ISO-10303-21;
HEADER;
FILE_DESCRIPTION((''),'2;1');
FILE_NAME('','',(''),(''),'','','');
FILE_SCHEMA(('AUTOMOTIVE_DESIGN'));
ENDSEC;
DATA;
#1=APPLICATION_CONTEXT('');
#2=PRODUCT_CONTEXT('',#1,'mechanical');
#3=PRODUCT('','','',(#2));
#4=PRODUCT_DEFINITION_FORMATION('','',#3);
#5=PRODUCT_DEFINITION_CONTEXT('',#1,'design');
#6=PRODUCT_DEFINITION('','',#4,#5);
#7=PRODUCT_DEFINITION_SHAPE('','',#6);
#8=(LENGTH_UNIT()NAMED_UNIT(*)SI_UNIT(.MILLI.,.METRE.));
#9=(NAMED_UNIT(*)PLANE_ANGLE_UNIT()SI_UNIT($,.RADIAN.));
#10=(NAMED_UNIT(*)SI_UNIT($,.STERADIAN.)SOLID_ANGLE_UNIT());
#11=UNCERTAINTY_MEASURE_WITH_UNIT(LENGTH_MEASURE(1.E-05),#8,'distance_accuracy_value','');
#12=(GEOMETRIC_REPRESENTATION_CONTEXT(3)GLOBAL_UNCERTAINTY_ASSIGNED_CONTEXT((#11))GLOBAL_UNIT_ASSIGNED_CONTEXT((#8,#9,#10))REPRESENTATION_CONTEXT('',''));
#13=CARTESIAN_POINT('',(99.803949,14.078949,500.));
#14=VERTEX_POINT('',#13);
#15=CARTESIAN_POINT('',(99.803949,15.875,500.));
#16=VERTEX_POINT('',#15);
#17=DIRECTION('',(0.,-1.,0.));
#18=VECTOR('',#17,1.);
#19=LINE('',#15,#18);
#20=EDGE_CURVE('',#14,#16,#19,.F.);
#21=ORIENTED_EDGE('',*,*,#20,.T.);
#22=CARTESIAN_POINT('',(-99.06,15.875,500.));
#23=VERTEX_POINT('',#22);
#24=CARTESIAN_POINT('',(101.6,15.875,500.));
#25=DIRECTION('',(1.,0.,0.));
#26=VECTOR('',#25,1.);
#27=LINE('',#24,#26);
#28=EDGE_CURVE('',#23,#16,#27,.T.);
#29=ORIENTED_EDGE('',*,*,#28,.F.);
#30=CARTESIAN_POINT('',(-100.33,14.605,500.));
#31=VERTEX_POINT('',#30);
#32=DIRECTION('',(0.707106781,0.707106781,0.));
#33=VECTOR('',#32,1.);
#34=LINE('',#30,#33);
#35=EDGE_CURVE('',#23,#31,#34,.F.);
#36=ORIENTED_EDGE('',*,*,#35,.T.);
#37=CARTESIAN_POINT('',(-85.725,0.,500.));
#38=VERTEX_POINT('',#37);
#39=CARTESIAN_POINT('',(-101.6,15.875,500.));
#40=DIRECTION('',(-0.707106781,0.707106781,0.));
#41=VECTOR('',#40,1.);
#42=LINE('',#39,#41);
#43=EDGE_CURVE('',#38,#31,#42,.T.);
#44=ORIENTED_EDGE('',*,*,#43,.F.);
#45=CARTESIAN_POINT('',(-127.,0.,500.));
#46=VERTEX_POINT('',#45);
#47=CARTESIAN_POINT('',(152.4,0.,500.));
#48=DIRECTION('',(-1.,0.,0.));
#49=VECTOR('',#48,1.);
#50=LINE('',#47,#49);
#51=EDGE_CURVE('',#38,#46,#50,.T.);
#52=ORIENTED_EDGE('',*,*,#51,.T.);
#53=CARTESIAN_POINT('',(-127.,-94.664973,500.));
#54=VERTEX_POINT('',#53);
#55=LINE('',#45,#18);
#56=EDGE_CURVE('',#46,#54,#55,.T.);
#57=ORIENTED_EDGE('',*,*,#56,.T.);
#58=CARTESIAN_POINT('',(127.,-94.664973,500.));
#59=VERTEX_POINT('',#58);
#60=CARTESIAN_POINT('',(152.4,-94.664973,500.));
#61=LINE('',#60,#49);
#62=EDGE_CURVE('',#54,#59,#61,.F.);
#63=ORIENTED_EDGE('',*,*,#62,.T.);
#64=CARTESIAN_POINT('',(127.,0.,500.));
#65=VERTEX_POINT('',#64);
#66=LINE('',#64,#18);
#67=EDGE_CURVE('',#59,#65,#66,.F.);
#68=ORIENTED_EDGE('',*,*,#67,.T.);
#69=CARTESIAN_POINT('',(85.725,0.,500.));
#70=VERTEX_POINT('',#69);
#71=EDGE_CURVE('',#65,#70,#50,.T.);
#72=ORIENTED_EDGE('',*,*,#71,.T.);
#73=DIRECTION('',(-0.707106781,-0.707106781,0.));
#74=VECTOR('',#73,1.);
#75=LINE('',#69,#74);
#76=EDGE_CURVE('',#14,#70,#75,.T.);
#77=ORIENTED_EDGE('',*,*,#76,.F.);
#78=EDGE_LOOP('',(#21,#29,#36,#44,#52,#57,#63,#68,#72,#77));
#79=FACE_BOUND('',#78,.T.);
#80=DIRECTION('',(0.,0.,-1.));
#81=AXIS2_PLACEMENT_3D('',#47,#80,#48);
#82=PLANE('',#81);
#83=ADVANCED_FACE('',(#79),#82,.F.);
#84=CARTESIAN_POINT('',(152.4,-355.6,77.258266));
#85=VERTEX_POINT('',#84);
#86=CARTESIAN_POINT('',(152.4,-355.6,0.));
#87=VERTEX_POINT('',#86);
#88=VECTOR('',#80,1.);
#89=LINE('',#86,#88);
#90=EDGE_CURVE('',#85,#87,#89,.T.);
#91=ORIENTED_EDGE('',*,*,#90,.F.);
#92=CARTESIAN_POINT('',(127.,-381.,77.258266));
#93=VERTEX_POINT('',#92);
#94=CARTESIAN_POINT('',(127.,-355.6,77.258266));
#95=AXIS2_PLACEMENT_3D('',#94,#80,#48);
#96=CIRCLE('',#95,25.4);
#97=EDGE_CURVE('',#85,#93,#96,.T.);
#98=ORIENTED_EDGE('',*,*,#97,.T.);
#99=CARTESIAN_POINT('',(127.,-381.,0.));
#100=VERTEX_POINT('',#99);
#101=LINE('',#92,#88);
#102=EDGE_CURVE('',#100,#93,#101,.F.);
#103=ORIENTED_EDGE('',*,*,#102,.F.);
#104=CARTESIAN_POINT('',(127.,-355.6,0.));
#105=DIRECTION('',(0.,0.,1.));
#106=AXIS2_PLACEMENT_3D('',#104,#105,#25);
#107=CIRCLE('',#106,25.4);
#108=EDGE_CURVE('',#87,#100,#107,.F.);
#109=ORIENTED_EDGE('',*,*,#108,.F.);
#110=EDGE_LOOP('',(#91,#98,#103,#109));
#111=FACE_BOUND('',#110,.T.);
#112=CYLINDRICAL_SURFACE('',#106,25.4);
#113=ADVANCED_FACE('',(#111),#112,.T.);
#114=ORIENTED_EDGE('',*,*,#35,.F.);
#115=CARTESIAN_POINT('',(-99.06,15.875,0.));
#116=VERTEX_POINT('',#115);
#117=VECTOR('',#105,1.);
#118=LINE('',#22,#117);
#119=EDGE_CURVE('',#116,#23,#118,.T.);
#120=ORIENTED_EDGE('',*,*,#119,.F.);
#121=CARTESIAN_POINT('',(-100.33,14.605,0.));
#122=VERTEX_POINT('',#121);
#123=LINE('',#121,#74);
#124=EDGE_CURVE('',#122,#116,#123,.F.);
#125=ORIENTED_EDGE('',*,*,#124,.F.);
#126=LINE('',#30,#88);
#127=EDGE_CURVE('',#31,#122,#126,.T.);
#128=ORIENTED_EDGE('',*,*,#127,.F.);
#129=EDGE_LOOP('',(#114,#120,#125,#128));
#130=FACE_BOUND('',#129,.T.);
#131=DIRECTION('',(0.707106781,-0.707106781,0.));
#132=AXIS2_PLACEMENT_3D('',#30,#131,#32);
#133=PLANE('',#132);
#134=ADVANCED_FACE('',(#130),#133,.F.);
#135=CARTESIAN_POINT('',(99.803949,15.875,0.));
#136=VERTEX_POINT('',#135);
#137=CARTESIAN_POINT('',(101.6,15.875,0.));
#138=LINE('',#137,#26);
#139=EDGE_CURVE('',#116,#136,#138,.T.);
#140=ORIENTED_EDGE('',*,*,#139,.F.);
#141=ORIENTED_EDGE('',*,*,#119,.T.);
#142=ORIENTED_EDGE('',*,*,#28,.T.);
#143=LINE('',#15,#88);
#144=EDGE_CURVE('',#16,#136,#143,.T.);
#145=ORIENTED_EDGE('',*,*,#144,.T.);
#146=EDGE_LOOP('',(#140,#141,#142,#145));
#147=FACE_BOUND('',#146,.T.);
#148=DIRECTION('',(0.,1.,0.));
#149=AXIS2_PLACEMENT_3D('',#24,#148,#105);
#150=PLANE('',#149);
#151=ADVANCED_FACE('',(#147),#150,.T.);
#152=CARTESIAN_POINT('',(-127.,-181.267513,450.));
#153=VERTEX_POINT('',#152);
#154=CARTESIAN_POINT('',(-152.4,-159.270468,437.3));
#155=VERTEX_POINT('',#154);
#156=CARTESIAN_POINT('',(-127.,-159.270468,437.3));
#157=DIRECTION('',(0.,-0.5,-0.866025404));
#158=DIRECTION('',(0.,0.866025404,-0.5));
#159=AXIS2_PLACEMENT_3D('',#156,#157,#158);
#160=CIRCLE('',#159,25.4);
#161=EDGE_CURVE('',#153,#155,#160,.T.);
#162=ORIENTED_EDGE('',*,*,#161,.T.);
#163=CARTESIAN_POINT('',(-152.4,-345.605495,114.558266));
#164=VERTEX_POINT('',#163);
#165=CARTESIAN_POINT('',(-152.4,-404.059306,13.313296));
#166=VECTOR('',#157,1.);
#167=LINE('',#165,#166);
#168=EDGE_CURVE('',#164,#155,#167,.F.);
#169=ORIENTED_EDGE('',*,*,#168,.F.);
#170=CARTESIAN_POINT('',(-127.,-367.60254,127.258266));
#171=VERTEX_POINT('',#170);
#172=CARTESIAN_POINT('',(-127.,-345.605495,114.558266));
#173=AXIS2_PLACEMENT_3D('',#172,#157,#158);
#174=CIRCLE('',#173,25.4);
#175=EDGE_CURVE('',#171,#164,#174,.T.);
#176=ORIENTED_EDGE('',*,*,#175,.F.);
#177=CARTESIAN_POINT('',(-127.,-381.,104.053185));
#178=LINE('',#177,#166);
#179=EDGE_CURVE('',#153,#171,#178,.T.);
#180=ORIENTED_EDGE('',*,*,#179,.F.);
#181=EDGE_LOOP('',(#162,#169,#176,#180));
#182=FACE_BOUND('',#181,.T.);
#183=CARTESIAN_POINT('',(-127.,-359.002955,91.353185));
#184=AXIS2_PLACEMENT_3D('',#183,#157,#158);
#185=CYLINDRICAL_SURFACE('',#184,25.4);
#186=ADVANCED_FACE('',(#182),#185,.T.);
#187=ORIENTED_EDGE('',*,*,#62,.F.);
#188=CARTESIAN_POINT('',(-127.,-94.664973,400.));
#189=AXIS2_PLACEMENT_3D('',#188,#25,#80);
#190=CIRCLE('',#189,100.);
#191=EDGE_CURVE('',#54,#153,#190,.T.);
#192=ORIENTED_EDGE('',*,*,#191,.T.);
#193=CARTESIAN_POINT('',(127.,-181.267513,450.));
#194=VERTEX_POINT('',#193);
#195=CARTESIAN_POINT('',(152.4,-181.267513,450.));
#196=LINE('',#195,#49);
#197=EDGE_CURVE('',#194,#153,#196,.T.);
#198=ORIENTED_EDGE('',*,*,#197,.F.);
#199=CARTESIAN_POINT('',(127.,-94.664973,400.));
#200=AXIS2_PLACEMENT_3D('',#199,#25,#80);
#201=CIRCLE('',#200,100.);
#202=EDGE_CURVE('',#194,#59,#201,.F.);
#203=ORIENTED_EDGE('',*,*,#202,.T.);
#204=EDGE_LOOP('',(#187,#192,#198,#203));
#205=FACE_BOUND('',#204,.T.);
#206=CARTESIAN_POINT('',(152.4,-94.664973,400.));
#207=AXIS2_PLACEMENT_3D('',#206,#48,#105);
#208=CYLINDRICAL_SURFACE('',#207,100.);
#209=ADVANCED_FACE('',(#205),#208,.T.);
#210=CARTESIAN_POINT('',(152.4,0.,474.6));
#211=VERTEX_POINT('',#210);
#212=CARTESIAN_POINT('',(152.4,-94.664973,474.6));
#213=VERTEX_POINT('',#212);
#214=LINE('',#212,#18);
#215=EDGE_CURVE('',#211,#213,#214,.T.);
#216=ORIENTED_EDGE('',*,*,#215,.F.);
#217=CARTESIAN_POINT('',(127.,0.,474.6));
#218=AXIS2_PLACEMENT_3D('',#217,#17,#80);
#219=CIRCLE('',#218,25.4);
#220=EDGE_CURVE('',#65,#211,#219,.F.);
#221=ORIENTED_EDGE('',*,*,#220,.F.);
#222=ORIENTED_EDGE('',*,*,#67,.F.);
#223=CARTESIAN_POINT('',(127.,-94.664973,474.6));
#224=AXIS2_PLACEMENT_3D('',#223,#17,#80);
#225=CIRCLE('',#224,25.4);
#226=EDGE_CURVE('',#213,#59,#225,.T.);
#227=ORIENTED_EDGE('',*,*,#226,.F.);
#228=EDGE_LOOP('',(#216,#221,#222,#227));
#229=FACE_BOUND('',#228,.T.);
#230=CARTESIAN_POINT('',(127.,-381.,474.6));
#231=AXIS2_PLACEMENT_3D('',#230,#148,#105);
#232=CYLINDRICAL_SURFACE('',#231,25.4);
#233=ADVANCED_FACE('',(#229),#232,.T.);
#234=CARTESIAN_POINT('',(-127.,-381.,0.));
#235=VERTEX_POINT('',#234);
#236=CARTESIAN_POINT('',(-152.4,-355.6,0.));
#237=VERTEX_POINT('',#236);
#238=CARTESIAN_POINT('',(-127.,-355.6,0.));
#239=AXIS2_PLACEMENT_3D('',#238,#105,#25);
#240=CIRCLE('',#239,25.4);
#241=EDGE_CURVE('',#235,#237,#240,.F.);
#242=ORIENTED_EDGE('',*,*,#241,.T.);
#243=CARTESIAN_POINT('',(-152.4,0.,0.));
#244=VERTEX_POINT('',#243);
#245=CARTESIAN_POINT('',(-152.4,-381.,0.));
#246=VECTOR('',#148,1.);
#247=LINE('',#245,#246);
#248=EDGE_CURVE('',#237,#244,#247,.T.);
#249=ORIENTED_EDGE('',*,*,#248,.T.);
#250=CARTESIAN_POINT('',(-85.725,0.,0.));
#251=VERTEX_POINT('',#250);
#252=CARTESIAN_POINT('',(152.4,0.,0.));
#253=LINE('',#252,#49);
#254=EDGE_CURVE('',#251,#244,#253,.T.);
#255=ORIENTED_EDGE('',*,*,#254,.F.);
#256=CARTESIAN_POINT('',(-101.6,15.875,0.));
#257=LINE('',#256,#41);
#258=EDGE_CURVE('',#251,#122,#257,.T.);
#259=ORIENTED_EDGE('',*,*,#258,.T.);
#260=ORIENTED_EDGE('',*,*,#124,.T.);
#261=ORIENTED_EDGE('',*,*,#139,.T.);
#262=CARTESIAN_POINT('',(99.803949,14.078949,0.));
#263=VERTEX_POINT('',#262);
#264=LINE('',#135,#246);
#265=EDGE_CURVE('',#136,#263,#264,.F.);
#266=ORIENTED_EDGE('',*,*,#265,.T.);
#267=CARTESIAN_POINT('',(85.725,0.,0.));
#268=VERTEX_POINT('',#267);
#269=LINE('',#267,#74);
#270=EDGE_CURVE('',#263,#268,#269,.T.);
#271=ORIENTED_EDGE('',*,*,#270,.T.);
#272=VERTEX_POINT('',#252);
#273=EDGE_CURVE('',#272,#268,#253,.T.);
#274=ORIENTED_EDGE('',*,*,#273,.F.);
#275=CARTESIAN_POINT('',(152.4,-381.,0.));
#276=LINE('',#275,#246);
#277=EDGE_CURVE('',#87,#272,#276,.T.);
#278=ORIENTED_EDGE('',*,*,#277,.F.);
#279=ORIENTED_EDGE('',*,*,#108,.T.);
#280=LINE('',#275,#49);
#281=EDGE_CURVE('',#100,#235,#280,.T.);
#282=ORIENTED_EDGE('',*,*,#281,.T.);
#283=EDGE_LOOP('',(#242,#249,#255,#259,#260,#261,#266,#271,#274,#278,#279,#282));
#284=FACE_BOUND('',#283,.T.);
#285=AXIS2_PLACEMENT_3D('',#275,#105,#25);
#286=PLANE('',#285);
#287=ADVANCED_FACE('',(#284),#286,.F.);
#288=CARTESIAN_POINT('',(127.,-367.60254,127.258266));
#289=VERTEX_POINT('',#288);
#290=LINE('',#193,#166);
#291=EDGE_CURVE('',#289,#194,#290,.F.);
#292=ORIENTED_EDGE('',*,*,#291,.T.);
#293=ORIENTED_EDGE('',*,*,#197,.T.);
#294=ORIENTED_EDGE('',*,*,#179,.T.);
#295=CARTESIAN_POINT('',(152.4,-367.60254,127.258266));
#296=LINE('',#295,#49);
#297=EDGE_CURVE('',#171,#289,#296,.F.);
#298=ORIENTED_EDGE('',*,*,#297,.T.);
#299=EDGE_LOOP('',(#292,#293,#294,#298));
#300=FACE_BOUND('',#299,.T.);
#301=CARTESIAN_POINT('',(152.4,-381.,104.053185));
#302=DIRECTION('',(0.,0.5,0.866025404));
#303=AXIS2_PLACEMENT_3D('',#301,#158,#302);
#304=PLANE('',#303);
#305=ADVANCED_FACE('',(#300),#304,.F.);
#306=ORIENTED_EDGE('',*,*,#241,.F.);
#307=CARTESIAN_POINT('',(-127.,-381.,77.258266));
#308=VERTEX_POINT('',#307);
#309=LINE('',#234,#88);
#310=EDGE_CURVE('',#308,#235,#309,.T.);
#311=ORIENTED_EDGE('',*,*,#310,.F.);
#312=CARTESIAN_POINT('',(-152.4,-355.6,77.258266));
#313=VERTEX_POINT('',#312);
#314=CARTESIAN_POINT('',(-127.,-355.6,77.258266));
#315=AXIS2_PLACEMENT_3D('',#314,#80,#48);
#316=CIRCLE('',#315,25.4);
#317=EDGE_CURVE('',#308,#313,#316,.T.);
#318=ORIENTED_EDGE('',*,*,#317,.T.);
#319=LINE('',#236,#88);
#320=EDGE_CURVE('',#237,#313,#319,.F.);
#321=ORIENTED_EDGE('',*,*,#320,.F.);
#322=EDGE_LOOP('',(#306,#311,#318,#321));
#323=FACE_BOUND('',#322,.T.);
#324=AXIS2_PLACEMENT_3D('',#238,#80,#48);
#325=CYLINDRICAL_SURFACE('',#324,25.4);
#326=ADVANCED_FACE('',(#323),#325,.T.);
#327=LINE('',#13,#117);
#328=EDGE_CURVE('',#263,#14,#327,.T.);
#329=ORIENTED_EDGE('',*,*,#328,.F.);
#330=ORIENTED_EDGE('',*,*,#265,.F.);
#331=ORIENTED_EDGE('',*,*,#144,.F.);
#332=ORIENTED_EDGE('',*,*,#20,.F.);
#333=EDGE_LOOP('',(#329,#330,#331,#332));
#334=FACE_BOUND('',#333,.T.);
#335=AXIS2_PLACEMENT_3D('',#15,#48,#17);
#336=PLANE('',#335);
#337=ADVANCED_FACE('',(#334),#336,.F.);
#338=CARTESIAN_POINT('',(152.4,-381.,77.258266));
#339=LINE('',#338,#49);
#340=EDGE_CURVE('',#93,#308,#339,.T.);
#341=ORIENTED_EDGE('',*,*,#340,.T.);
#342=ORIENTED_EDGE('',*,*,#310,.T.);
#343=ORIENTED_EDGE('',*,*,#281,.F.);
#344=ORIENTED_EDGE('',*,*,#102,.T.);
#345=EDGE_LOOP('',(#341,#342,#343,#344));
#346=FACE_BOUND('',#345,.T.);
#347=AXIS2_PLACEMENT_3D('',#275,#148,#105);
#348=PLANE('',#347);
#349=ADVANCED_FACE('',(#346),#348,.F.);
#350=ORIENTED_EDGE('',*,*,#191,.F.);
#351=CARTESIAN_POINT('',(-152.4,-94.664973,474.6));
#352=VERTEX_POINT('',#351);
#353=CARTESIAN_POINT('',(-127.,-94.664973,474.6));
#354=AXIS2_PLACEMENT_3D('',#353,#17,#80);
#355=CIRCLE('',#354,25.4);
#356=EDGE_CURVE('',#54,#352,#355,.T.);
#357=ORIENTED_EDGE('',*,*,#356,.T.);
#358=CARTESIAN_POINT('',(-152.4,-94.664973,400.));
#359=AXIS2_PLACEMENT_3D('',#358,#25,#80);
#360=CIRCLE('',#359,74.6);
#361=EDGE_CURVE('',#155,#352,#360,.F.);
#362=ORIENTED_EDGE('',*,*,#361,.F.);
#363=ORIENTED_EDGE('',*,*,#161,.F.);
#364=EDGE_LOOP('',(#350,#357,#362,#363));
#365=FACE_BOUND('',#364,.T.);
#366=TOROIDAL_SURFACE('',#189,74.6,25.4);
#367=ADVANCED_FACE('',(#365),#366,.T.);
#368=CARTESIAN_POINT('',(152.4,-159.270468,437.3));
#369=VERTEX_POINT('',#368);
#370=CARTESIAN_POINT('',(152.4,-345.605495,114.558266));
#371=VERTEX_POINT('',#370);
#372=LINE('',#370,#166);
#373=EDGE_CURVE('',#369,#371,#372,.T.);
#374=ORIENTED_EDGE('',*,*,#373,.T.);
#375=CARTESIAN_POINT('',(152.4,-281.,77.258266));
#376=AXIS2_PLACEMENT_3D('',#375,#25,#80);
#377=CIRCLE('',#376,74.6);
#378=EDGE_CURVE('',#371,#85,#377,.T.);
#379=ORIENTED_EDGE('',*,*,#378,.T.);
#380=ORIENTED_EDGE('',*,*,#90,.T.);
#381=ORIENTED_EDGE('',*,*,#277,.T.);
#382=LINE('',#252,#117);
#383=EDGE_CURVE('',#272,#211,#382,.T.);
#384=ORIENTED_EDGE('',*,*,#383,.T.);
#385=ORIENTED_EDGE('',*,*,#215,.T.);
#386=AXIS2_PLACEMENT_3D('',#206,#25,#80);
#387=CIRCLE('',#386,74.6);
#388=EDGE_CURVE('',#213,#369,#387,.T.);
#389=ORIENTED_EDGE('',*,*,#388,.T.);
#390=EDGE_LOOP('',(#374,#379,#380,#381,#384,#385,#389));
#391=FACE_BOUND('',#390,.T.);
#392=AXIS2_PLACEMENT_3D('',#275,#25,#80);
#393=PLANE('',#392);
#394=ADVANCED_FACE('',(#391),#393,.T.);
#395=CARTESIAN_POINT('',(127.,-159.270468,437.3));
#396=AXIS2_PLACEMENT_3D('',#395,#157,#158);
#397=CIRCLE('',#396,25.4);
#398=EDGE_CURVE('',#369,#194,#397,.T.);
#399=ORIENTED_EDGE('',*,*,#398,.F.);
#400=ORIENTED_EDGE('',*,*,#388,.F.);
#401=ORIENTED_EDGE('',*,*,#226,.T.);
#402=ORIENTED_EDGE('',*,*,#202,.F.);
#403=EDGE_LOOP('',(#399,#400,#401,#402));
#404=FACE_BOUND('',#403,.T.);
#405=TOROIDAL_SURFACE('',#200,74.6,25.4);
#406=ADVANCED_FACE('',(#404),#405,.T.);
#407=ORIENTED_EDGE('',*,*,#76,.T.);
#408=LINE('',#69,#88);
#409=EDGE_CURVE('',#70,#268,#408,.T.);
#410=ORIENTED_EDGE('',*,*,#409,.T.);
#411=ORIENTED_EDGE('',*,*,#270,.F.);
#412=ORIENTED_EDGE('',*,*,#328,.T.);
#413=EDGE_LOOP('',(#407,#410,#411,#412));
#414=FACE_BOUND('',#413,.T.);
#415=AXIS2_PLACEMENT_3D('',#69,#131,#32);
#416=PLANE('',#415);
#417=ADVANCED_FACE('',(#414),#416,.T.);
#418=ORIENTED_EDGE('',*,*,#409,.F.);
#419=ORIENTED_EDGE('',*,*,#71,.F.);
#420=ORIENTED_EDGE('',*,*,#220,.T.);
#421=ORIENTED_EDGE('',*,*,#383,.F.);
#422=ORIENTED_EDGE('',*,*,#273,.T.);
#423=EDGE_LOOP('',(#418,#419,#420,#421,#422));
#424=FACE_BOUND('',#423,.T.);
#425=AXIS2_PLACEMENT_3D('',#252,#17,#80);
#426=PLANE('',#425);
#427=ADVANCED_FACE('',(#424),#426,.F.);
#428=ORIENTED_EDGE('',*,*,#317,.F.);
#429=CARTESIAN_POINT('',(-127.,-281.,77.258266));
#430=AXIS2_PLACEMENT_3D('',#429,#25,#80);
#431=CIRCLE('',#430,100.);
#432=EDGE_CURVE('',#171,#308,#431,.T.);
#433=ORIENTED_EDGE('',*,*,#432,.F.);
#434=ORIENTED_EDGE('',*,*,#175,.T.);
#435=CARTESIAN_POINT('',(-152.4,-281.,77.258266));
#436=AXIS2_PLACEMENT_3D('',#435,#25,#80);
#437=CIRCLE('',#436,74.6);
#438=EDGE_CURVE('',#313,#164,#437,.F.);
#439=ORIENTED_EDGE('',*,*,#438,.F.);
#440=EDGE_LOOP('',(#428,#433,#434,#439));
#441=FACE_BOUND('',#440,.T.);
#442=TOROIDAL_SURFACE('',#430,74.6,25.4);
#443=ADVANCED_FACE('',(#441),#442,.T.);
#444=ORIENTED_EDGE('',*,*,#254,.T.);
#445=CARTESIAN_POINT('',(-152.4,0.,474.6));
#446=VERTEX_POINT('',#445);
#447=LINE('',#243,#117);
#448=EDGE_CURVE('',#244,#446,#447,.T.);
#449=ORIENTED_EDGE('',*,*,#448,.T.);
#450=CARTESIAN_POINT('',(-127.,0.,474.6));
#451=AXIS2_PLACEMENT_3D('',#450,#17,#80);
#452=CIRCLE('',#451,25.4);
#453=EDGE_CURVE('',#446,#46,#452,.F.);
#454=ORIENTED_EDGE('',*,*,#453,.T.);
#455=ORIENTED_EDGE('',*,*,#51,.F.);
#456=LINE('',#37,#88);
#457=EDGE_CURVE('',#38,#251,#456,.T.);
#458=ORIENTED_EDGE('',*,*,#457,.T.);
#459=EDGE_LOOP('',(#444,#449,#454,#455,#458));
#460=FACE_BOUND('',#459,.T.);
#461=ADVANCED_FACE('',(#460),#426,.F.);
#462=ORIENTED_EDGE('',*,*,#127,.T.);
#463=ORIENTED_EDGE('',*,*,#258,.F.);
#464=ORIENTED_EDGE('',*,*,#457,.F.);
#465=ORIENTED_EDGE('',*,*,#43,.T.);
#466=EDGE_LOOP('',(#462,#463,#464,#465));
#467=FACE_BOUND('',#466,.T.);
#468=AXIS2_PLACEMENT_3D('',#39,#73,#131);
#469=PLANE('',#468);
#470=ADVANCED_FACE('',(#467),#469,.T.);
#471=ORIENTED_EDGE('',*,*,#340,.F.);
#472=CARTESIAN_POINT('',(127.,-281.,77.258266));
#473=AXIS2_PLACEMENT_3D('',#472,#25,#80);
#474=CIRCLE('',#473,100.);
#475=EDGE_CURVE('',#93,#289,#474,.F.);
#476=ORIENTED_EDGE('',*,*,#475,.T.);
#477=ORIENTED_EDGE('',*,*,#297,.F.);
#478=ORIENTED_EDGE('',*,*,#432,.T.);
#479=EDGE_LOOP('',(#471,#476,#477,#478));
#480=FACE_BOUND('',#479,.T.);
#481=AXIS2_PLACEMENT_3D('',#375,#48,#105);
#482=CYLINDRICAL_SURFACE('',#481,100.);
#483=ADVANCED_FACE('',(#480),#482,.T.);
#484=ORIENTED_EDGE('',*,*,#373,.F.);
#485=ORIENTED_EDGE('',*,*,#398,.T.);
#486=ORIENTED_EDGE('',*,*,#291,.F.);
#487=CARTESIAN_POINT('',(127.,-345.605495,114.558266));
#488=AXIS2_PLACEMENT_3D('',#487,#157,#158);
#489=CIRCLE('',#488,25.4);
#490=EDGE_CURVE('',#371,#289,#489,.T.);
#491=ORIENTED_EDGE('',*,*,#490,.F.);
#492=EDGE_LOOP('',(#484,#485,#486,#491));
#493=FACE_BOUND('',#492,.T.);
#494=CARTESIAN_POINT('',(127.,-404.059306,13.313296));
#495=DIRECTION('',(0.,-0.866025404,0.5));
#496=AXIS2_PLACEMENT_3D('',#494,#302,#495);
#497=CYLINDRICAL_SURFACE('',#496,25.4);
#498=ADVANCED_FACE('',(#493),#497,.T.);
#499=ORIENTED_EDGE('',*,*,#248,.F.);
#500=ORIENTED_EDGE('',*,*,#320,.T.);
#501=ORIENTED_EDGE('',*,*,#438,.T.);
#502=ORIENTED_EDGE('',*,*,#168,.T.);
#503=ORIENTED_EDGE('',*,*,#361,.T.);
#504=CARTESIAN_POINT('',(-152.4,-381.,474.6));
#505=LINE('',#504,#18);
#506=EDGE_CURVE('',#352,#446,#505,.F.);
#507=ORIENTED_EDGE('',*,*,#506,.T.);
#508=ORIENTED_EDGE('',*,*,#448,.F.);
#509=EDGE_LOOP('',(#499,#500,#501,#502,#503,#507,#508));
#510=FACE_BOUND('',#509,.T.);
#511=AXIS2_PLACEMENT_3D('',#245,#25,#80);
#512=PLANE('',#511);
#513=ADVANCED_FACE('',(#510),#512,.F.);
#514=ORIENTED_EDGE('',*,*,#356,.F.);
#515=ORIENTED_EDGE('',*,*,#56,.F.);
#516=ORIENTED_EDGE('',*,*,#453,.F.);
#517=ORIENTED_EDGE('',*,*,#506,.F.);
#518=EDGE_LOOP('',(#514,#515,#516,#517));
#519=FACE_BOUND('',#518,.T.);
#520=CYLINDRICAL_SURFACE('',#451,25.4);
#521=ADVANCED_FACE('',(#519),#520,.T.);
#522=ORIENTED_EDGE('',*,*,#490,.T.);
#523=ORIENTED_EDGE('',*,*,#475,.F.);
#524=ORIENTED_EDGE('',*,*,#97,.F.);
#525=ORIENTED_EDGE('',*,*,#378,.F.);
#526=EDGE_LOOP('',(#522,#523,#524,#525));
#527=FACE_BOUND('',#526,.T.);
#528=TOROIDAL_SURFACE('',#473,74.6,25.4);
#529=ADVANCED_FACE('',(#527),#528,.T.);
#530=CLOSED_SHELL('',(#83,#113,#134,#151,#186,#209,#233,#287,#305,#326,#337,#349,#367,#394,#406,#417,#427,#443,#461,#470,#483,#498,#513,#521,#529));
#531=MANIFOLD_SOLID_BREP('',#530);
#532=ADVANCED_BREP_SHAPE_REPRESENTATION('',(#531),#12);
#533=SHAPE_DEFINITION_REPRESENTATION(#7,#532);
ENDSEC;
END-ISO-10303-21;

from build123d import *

# Parameters (mm, degrees)
EXTRUDE1_DEPTH  = 152.4
EXTRUDE2_DEPTH  = 500
CHAMFER1_SIZE   = 1.796051224
CHAMFER1_SIZE_2 = 2.54
FILLET1_R       = 100
FILLET2_R       = 25.4


with BuildPart() as part:
    # Sketch1 → Extrude1 (new, symmetric)
    with BuildSketch(Plane(origin=(0, 0, 0), x_dir=(0, 0, -1), z_dir=(1, 0, 0))):
        Polygon((0, 0), (-500, 0), (-500, -152.4), (-104.05318539, -381), (0, -381), align=None)
    extrude(amount=EXTRUDE1_DEPTH, both=True)

    # Sketch2 → Extrude2 (add, through all)
    with BuildSketch(Plane(origin=(0, 0, 0), x_dir=(-1, 0, 0), z_dir=(0, 0, -1))):
        Polygon((-85.725, 0), (-101.6, 15.875), (101.6, 15.875), (85.725, 0), align=None)
    extrude(amount=-EXTRUDE2_DEPTH)

    # Chamfer1
    # the kernel refuses this chamfer: 2.54, 1.796051224 mm, written as the material it takes off along each edge
    with BuildSketch(Plane(origin=(-101.6, 15.875, -6.532074789), x_dir=(0.6660419652145836, -0.7459142715976788, 0), z_dir=(0, 0, 1)), Plane(origin=(101.6, 15.875, -6.532074789), x_dir=(-0.9984038297885897, 0.056478249472489896, 0), z_dir=(0, 0, 1))) as chamfer1_piece_1:
        Polygon((CHAMFER1_SIZE * 0.998403829907, CHAMFER1_SIZE * 0.0564782494792), (CHAMFER1_SIZE_2 * 0.666041965215, CHAMFER1_SIZE_2 * 0.745914271598), (0, 0), align=None)
    extrude(amount=513.064149579, mode=Mode.SUBTRACT)

    # Fillet1
    fillet1_edges = [part.edges().sort_by_distance(p)[0] for p in [
        (0, -381, 104.05318539),
        (0, -152.4, 500),
    ]]
    fillet(fillet1_edges, radius=FILLET1_R)

    # Fillet2
    fillet2_edges = [part.edges().sort_by_distance(p)[0] for p in [
        (-152.4, -381, 38.629133073),
        (-152.4, -377.592582629, 103.140170657),
        (-152.4, -274.435026919, 288.629133073),
        (-152.4, -144.664973081, 486.602540378),
        (152.4, -381, 38.629133073),
        (152.4, -377.592582629, 103.140170657),
        (152.4, -274.435026919, 288.629133073),
        (152.4, -144.664973081, 486.602540378),
        (-152.4, -47.332486541, 500),
        (152.4, -47.332486541, 500),
    ]]
    fillet(fillet2_edges, radius=FILLET2_R)


solid = part.part
